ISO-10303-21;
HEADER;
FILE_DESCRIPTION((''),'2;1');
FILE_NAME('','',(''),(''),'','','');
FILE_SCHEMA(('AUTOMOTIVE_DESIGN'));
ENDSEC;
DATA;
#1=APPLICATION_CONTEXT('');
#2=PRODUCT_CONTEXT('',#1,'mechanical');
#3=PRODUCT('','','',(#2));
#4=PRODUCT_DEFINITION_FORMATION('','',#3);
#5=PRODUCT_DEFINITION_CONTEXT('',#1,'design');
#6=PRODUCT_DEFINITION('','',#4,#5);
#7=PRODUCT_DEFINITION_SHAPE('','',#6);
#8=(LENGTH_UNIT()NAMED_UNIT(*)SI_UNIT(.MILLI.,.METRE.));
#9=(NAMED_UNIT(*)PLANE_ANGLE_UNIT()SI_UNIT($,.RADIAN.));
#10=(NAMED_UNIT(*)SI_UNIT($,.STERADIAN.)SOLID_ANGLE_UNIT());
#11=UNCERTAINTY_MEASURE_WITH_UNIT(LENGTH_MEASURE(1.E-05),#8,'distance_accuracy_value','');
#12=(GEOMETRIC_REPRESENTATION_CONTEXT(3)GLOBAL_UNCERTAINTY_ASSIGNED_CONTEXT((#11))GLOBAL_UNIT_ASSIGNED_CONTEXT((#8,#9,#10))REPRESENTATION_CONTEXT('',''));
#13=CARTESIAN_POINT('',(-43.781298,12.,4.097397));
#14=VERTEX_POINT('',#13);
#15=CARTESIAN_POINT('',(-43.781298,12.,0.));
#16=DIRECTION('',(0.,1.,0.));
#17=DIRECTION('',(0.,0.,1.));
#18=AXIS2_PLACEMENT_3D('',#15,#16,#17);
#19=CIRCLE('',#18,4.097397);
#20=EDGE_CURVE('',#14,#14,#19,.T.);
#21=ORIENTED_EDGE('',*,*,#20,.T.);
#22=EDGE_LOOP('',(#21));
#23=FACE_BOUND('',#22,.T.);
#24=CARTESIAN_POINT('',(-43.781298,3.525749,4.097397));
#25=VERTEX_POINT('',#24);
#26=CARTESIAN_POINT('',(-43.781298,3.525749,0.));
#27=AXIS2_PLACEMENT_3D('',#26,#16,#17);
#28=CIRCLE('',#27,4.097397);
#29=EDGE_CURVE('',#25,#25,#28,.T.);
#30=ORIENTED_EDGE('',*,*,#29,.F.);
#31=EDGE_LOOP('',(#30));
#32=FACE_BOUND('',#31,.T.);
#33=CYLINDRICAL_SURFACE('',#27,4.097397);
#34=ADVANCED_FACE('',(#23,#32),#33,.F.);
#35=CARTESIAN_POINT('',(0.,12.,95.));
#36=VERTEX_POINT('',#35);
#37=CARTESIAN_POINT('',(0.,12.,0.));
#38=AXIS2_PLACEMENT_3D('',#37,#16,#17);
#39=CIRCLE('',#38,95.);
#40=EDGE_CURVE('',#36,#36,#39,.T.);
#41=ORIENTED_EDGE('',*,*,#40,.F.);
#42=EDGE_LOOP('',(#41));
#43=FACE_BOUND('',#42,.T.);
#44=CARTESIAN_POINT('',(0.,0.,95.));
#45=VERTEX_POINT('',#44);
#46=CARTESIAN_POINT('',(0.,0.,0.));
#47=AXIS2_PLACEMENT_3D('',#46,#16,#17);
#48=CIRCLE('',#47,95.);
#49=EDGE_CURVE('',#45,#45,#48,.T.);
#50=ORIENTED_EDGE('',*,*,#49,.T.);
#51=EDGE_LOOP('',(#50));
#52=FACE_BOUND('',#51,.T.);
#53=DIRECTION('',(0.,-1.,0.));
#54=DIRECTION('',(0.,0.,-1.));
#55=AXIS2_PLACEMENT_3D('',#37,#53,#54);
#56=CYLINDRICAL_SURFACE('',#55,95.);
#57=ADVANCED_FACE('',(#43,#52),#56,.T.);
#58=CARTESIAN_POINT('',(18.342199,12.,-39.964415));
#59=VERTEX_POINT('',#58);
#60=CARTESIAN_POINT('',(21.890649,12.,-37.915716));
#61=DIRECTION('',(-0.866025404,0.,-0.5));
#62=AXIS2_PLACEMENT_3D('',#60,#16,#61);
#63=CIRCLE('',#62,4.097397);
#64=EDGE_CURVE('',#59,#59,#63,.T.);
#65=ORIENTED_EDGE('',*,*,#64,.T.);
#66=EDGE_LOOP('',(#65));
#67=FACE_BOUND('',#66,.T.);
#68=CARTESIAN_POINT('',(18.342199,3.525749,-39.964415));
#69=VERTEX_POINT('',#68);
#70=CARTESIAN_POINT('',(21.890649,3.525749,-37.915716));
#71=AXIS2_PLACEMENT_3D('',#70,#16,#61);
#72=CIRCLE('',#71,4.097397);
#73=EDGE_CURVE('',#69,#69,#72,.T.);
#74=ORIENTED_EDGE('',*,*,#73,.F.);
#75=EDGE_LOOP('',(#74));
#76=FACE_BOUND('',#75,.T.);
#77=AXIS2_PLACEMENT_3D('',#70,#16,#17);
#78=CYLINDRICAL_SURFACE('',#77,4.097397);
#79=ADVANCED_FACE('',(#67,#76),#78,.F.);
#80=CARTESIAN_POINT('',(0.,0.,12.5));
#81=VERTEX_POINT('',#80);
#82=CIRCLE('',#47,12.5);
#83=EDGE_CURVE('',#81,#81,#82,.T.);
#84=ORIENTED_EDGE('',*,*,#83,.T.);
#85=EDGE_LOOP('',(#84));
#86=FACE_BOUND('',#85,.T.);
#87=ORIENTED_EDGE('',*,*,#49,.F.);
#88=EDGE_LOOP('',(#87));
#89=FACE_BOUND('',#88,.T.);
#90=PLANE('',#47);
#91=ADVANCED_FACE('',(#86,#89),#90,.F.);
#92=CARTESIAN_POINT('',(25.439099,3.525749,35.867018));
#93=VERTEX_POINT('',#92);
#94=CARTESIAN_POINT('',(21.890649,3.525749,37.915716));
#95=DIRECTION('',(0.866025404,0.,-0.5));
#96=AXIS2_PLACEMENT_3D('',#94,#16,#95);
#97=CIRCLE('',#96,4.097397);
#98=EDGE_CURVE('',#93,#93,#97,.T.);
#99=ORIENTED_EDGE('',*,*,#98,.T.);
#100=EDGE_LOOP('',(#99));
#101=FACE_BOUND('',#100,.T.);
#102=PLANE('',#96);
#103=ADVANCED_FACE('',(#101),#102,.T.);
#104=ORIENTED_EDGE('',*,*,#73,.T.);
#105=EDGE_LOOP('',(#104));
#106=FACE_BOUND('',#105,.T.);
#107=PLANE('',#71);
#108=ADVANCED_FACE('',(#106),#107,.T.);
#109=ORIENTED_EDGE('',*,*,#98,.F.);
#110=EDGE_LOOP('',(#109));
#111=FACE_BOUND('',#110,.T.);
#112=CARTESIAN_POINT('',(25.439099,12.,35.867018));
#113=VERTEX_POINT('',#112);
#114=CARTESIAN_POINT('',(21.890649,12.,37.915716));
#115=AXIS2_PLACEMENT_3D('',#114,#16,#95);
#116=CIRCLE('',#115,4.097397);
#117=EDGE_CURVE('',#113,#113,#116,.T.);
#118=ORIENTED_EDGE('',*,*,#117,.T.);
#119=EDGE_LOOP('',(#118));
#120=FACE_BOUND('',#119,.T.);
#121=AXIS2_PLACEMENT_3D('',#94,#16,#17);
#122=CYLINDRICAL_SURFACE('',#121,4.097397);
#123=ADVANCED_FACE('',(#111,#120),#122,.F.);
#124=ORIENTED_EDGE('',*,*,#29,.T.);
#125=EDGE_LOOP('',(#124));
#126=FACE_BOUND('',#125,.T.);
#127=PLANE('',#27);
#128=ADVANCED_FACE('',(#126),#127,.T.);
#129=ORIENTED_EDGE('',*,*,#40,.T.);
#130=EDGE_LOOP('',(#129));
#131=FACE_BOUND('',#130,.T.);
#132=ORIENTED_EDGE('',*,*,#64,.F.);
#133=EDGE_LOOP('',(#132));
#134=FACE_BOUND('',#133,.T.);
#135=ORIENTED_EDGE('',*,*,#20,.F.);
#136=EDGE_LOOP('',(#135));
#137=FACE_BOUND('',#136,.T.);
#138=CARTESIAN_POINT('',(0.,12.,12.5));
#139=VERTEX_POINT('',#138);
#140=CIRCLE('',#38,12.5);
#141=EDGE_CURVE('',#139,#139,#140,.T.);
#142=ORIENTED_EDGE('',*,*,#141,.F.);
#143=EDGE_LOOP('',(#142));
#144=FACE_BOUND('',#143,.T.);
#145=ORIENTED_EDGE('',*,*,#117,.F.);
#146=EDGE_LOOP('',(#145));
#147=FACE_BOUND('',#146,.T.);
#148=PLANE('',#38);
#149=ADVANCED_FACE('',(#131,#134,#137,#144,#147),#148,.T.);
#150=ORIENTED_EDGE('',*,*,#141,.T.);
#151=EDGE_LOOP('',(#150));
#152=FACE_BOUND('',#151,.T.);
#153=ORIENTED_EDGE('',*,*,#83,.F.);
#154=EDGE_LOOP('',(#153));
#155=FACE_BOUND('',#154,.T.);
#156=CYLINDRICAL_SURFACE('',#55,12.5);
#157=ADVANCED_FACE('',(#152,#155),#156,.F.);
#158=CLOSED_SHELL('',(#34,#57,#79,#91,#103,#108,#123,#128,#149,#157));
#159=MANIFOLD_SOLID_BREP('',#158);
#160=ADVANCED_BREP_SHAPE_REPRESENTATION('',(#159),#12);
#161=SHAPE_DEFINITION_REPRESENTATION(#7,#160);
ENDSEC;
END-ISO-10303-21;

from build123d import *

# Parameters (mm, degrees)
SKETCH1_R           = 95
BOSS_EXTRUDE1_DEPTH = 12
SKETCH2_R           = 12.5
CUT_EXTRUDE1_DEPTH  = 135.88513632
SKETCH3_R           = 4.097397013
CUT_EXTRUDE2_DEPTH  = 8.474250982
CIRPATTERN1_COUNT   = 3


with BuildPart() as part:
    # Sketch1 → Boss-Extrude1 (new body)
    with BuildSketch(Plane(origin=(0, 0, 0), x_dir=(1, 0, 0), z_dir=(0, 1, 0))):
        Circle(SKETCH1_R)
    extrude(amount=BOSS_EXTRUDE1_DEPTH)

    # Sketch2 → Cut-Extrude1 (cut, through all)
    with BuildSketch(Plane(origin=(0, 0, 0), x_dir=(1, 0, 0), z_dir=(0, 1, 0))):
        Circle(SKETCH2_R)
    extrude(amount=CUT_EXTRUDE1_DEPTH, mode=Mode.SUBTRACT)

    # Sketch3 → Cut-Extrude2 (cut)
    with BuildSketch(Plane(origin=(0, 12, 0), x_dir=(1, 0, 0), z_dir=(0, 1, 0))):
        with Locations((-43.781298252, 0)):
            Circle(SKETCH3_R)
    cut_extrude2 = extrude(amount=-CUT_EXTRUDE2_DEPTH, mode=Mode.SUBTRACT)

    # CirPattern1: Cut-Extrude2 ×3 about axis
    cirpattern1_axis = Axis((0, 0, 0), (0, 1, 0))
    for i in range(1, CIRPATTERN1_COUNT):
        add(cut_extrude2.rotate(cirpattern1_axis, i * 360 / CIRPATTERN1_COUNT), mode=Mode.SUBTRACT)


solid = part.part
